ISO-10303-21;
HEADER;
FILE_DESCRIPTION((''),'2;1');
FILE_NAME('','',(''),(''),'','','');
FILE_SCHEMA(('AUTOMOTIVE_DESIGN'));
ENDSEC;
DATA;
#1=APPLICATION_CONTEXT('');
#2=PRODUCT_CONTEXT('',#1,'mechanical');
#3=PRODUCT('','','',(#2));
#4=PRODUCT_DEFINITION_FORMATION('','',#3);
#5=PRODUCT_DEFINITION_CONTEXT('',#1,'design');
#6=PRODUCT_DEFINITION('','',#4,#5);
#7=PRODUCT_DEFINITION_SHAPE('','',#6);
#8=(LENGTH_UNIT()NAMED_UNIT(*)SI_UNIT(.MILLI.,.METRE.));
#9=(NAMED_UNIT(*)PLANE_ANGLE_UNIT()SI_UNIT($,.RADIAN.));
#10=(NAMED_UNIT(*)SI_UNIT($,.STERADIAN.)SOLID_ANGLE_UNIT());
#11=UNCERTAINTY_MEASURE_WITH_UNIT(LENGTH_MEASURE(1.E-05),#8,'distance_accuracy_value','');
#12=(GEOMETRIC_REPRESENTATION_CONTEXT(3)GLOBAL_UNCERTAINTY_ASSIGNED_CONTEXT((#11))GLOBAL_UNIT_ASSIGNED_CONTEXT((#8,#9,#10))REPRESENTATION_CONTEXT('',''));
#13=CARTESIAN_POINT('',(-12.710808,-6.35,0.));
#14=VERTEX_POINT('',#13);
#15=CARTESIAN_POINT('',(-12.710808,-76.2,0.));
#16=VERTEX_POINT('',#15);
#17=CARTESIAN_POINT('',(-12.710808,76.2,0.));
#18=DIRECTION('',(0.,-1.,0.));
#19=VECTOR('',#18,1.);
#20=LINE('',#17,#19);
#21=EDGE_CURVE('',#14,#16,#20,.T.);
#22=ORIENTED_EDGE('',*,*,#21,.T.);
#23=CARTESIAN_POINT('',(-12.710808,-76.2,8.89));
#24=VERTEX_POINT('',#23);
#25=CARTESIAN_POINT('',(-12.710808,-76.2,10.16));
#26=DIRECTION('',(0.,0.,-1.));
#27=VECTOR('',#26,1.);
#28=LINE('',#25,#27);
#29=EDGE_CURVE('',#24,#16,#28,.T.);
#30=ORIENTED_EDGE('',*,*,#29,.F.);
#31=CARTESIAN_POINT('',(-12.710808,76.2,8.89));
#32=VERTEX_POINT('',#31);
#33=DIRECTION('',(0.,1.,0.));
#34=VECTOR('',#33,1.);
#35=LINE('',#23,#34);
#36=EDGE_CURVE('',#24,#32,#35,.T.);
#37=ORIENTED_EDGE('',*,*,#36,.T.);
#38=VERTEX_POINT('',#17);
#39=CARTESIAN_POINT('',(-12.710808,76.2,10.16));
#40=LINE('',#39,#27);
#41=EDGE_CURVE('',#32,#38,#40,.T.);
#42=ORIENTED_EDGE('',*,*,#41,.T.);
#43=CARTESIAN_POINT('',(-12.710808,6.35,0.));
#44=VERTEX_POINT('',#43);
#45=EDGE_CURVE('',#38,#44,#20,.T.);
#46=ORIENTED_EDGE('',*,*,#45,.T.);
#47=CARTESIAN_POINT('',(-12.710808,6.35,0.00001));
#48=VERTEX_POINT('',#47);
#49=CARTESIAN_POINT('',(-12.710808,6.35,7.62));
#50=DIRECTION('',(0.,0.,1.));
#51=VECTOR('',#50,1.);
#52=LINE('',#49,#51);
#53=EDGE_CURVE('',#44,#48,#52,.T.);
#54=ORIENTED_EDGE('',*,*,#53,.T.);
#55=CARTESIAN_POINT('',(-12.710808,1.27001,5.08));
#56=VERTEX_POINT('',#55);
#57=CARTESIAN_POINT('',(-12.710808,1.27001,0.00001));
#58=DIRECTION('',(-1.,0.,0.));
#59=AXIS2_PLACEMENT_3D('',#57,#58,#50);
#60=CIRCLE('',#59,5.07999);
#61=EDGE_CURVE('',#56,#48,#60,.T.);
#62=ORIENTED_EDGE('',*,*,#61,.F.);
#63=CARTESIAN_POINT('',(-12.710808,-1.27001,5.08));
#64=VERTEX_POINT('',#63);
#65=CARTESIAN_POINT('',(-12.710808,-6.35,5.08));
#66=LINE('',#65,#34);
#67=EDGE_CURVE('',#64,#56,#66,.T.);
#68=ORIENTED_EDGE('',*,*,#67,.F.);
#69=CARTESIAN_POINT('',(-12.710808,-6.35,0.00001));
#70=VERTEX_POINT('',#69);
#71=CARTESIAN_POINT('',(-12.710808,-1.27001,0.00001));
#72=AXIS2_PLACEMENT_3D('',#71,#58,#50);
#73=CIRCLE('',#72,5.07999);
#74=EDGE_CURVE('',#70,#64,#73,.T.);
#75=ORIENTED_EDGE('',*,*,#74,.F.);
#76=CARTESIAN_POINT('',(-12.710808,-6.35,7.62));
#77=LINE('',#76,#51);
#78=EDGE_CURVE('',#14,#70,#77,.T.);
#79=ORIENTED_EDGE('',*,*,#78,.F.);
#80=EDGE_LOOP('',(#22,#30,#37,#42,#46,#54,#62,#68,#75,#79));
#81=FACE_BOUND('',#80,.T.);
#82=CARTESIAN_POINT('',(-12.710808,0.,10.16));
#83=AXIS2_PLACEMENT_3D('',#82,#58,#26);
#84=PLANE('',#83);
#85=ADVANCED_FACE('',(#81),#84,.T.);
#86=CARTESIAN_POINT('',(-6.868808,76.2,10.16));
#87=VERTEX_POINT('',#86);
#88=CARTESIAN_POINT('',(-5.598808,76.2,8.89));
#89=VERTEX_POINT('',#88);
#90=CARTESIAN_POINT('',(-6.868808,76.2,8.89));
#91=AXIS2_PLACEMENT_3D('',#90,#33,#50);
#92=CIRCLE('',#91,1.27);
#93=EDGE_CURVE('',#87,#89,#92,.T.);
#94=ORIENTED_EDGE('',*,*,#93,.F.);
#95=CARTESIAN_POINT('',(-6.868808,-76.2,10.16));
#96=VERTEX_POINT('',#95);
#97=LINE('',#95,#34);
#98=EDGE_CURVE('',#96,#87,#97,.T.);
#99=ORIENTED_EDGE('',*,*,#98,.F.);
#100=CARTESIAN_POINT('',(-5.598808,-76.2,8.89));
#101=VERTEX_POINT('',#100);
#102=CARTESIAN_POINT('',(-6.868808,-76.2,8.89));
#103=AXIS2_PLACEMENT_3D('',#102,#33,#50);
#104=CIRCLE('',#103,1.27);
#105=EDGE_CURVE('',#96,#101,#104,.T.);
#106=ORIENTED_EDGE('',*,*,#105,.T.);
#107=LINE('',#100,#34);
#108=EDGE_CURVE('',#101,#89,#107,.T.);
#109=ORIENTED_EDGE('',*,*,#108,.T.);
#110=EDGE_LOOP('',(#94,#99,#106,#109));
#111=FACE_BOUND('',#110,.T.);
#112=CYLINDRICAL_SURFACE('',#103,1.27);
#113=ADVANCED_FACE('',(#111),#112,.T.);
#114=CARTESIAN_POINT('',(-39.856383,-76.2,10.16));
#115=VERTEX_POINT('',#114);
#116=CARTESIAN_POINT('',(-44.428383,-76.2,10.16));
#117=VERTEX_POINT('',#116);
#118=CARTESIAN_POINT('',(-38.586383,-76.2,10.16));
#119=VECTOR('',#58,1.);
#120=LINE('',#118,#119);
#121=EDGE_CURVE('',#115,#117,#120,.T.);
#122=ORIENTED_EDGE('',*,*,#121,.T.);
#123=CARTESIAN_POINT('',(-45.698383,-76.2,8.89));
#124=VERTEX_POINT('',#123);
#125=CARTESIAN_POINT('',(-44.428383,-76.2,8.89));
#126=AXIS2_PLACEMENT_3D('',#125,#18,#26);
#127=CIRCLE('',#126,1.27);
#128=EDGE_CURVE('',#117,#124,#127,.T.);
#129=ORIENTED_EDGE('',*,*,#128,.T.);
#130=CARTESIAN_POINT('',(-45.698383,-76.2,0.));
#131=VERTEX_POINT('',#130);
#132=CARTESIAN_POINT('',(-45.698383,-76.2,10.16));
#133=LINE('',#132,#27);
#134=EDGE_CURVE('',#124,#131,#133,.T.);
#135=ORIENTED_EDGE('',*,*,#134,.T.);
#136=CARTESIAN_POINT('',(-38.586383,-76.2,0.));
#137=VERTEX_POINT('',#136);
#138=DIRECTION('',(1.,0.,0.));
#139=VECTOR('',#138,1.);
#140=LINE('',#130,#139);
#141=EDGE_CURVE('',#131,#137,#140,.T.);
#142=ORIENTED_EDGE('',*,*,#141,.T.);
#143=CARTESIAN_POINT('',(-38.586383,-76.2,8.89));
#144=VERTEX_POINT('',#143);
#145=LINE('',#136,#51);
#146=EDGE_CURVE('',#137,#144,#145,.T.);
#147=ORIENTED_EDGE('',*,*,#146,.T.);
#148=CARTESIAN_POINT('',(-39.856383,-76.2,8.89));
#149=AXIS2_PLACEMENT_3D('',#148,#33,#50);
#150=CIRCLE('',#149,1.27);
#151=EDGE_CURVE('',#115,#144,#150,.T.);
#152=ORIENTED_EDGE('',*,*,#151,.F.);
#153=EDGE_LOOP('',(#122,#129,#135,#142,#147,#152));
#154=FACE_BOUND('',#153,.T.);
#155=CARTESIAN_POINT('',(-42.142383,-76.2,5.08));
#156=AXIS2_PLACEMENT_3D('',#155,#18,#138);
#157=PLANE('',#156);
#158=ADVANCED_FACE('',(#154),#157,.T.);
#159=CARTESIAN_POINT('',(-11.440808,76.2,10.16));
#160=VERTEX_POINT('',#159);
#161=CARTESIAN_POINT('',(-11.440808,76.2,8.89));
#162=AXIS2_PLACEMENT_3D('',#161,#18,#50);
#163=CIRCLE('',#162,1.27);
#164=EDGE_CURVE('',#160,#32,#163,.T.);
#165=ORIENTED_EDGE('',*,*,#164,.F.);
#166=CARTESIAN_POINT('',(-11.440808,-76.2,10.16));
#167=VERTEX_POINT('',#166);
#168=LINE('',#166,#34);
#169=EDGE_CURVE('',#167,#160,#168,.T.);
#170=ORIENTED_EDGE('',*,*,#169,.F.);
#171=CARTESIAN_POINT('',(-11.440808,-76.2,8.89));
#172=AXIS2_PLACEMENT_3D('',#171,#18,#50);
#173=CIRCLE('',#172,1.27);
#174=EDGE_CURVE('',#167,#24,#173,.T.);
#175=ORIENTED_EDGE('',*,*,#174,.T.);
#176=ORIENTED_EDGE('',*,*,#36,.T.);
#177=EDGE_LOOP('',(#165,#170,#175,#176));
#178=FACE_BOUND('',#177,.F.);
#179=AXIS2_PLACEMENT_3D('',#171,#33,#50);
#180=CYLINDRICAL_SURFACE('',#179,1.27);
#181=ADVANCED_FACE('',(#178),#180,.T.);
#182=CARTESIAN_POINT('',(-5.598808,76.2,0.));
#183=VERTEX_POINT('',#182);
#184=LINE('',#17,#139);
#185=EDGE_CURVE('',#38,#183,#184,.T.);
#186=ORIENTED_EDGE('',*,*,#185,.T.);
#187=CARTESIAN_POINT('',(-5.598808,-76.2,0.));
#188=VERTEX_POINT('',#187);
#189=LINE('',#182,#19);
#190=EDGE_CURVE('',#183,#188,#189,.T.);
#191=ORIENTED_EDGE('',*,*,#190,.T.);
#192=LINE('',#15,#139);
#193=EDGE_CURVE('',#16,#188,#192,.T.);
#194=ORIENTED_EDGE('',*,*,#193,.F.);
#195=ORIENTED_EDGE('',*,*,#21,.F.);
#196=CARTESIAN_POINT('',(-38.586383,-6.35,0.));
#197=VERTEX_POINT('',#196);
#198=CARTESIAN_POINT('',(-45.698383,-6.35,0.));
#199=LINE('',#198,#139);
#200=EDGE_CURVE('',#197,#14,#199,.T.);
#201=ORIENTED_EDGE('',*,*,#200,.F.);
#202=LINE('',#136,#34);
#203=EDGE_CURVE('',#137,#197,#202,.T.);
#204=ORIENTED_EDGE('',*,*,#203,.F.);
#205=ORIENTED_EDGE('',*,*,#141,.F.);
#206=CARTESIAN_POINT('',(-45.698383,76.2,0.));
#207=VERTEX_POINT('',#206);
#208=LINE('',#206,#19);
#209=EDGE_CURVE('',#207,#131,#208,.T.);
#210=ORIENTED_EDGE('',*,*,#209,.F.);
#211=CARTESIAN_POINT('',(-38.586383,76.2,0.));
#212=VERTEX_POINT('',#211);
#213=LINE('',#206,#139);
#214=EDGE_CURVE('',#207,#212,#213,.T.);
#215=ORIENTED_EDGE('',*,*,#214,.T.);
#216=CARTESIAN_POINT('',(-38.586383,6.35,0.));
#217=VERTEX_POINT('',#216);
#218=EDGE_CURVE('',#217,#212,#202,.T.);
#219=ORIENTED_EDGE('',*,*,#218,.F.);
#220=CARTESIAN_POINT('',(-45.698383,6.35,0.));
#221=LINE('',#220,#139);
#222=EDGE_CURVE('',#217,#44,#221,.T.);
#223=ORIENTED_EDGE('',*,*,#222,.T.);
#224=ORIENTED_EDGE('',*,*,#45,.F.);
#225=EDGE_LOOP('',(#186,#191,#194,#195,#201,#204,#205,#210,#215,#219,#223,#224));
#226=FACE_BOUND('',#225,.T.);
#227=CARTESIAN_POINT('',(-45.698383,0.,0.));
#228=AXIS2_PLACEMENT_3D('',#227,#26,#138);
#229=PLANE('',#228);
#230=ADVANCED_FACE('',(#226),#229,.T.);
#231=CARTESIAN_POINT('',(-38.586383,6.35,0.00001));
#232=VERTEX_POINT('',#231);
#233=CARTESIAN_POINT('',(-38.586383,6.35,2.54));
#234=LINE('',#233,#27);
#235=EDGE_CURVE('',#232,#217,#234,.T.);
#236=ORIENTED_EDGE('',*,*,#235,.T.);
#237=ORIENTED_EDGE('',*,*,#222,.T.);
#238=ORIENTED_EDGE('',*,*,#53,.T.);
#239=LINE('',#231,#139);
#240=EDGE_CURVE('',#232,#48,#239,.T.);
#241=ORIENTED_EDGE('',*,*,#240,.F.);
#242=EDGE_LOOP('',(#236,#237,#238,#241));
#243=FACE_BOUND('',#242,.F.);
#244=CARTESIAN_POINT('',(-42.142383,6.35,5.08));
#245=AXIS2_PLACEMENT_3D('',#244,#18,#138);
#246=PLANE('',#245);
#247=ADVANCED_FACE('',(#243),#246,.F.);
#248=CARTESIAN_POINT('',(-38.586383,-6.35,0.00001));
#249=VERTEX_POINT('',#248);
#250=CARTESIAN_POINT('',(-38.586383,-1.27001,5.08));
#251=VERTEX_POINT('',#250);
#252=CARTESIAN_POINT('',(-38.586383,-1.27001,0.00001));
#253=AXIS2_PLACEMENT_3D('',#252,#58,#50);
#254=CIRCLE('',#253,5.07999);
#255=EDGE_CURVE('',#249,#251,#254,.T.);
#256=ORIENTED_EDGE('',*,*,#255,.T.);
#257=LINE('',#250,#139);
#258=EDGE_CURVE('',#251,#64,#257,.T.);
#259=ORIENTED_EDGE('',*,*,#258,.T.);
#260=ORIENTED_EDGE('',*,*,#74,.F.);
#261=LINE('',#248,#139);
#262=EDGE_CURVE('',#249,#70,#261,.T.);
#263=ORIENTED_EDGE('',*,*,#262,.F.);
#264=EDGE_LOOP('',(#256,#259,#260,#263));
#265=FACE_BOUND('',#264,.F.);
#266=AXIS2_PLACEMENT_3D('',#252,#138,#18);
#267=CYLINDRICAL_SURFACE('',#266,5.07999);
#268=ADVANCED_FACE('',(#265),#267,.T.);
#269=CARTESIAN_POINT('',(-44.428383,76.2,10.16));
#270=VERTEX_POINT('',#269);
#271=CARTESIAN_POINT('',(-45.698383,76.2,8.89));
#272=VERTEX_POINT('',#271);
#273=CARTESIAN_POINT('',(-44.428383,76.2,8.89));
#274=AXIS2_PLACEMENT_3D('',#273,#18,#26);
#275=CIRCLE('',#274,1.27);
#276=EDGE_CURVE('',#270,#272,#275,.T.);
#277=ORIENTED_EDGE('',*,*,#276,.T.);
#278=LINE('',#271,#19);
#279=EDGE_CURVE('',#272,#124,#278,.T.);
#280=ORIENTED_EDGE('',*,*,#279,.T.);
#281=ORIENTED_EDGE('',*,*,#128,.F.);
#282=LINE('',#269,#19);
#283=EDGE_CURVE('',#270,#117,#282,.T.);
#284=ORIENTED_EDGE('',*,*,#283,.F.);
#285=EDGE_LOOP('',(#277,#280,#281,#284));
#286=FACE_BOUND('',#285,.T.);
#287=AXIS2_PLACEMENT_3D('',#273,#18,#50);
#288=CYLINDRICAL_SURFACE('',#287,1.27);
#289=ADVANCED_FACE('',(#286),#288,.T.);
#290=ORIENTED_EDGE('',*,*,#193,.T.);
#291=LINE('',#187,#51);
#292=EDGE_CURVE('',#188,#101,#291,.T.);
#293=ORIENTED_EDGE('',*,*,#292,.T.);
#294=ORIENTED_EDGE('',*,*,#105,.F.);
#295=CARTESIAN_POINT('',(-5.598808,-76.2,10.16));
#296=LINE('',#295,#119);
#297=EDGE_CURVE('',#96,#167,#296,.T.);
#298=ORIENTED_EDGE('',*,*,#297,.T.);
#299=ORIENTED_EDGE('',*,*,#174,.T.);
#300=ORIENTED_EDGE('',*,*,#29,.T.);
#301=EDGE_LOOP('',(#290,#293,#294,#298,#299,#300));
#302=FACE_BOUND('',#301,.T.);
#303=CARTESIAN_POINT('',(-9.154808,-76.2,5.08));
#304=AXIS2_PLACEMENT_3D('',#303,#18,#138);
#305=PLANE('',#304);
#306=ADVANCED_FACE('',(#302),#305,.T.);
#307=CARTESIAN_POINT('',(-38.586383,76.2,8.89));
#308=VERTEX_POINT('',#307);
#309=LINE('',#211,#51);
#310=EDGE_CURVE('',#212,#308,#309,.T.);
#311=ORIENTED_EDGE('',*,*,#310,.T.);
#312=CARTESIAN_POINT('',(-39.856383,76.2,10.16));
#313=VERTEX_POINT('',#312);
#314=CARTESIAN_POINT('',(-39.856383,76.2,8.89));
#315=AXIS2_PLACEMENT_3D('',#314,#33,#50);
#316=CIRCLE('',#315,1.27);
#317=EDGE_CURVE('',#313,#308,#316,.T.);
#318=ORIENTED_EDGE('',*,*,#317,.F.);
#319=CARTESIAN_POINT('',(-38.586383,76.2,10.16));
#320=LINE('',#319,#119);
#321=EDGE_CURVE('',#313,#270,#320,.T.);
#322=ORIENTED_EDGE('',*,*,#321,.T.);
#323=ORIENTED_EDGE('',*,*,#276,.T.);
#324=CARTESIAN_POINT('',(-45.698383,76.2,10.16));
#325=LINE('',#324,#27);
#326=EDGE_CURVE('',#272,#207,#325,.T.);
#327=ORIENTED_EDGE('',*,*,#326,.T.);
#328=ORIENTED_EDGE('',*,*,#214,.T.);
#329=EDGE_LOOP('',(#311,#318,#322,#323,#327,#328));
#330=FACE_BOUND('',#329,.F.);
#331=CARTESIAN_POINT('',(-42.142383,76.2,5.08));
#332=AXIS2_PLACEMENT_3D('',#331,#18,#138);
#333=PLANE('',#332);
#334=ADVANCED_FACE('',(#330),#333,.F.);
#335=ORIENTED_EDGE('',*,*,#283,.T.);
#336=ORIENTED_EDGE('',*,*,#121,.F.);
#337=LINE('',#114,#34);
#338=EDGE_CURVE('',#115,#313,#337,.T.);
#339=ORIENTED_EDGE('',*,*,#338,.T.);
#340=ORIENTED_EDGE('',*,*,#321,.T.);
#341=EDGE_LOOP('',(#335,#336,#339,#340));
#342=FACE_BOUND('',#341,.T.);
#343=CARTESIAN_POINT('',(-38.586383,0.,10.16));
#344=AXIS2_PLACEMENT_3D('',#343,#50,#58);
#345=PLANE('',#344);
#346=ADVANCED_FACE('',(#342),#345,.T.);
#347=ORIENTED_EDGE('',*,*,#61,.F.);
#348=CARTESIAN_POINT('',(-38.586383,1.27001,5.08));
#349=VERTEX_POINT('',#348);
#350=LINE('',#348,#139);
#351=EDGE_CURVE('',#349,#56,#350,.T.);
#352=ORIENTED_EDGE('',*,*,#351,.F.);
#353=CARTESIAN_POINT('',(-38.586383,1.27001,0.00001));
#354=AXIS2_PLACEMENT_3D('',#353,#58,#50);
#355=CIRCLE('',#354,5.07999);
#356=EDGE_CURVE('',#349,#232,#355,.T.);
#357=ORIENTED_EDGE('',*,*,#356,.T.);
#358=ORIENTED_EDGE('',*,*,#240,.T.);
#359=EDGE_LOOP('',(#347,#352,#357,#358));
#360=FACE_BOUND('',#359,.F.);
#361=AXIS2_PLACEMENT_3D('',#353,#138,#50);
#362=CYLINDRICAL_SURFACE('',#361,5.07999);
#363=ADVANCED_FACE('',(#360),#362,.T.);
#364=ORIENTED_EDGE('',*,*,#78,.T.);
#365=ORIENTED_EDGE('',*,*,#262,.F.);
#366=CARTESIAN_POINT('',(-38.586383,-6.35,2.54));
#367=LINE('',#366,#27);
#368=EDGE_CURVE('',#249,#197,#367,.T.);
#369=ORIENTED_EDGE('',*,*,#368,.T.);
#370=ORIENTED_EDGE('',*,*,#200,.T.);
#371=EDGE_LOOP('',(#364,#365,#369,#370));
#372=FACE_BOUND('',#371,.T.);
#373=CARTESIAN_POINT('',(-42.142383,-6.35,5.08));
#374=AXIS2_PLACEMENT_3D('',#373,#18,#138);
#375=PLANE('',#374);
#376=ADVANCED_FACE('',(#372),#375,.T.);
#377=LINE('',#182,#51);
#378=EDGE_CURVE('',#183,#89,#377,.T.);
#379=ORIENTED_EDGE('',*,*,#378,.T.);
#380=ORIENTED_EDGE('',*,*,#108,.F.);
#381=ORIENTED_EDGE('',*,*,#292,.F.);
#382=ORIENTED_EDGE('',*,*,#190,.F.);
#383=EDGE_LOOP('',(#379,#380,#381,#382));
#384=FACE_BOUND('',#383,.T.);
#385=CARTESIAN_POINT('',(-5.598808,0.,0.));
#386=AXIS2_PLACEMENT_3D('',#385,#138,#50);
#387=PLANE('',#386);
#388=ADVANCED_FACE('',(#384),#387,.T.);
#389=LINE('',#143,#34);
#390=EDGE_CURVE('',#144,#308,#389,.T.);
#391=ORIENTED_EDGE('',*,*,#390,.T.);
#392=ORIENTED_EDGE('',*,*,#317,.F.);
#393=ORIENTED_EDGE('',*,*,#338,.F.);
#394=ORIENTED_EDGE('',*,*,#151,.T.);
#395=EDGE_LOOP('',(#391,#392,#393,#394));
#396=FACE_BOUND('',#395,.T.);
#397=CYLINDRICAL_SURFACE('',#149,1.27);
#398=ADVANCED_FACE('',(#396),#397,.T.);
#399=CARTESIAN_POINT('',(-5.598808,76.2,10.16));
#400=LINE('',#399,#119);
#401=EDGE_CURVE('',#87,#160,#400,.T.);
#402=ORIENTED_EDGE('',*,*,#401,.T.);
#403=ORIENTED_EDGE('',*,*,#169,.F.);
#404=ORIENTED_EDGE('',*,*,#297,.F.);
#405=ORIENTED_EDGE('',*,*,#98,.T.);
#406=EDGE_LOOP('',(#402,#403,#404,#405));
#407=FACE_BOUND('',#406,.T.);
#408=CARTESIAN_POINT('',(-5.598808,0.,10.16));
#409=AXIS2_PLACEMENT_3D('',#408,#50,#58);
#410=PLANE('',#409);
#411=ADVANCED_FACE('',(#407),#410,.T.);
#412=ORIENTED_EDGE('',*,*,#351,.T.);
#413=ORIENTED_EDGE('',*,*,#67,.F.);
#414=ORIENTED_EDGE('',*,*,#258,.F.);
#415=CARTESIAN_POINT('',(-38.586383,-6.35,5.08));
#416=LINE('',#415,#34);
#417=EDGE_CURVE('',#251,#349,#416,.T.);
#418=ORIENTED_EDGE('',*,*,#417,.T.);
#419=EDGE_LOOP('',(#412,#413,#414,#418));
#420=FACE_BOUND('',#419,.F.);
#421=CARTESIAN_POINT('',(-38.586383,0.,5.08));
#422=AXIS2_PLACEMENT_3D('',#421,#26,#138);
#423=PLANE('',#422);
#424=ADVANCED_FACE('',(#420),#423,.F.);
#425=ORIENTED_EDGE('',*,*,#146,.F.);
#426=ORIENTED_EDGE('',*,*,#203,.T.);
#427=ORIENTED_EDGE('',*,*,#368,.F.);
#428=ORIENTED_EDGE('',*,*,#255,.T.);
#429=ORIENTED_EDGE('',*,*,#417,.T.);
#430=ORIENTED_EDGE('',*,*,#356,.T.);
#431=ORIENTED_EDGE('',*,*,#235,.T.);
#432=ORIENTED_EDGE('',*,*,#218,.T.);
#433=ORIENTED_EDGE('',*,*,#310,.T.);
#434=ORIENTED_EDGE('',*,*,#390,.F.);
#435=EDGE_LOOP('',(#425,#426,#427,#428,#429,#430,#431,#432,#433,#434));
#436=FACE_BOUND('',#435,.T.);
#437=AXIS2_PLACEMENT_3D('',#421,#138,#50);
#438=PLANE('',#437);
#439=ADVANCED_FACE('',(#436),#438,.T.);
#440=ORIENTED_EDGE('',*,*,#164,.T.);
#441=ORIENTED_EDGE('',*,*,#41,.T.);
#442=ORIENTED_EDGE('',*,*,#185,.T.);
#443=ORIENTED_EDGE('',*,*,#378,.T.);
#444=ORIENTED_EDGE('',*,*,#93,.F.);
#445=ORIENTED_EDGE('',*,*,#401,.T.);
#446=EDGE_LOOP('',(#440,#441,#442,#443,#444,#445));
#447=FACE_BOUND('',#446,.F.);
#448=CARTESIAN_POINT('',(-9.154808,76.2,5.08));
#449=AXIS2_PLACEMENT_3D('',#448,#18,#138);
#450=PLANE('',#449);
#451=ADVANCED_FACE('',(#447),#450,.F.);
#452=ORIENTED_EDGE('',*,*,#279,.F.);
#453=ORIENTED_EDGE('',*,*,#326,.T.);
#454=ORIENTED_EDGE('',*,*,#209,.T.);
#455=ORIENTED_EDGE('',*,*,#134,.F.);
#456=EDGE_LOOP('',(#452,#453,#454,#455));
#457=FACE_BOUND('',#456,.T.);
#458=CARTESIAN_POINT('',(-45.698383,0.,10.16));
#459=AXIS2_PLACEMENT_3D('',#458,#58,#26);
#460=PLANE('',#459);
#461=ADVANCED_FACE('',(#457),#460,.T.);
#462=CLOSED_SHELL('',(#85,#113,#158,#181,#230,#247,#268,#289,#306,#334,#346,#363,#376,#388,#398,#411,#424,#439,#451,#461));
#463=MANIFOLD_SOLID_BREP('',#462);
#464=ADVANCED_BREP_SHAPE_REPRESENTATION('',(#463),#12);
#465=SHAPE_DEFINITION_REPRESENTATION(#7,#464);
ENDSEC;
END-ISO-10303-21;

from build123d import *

# Parameters (mm, degrees)
F1_DEPTH = 76.2
F0_W     = 25.8755748077
F0_H     = 5.08
F2_DEPTH = 6.35
F3_R     = 1.27
F4_R     = 5.07999


# Not quite as in the source:
# - two fillets or chamfers of one size are made in one step
# - a fillet or chamfer is up to 0.001 mm smaller than in the source, because OpenCascade refuses the exact size


with BuildPart() as f1:
    # F0 (on Front) → F1 (new body, symmetric)
    with BuildSketch(Plane.XZ):
        Polygon((-38.5863832052, 10.16), (-45.6983832052, 10.16), (-45.6983832052, 0), (-38.5863832052, 0), (-38.5863832052, 5.08), align=None)
    extrude(amount=F1_DEPTH, both=True)



with BuildPart() as f1b:
    # F0 (on Front) → F1, piece 2 (new body, symmetric)
    with BuildSketch(Plane.XZ):
        Polygon((-12.7108083974, 10.16), (-12.7108083974, 5.08), (-12.7108083974, 0), (-5.5988083974, 0), (-5.5988083974, 10.16), align=None)
    extrude(amount=F1_DEPTH, both=True)


with BuildPart() as f1_1:
    add(f1.part)

    add(f1b.part)  # F2 merges F1b
    # F0 (on Front) → F2 (join, symmetric)
    with BuildSketch(Plane.XZ):
        Polygon((-38.5863832052, 10.16), (-45.6983832052, 10.16), (-45.6983832052, 0), (-38.5863832052, 0), (-38.5863832052, 5.08), align=None)
        with Locations((-25.6485958013, 2.54)):
            Rectangle(F0_W, F0_H)
        Polygon((-12.7108083974, 10.16), (-12.7108083974, 5.08), (-12.7108083974, 0), (-5.5988083974, 0), (-5.5988083974, 10.16), align=None)
    extrude(amount=F2_DEPTH, both=True)

    # F3
    f3_edges = [f1_1.edges().sort_by_distance(p)[0] for p in [
        (-45.698383, 0, 10.16),
        (-38.586383, 0, 10.16),
        (-12.710808, 0, 10.16),
        (-5.598808, 0, 10.16),
    ]]
    fillet(f3_edges, radius=F3_R)

    # F4 (radius 5.08 in the source; OpenCascade refuses exactly that, so slightly less here)
    f4_edges = [f1_1.edges().sort_by_distance(p)[0] for p in [
        (-25.648596, 6.35, 5.08),
        (-25.648596, -6.35, 5.08),
    ]]
    fillet(f4_edges, radius=F4_R)


solid = f1_1.part
